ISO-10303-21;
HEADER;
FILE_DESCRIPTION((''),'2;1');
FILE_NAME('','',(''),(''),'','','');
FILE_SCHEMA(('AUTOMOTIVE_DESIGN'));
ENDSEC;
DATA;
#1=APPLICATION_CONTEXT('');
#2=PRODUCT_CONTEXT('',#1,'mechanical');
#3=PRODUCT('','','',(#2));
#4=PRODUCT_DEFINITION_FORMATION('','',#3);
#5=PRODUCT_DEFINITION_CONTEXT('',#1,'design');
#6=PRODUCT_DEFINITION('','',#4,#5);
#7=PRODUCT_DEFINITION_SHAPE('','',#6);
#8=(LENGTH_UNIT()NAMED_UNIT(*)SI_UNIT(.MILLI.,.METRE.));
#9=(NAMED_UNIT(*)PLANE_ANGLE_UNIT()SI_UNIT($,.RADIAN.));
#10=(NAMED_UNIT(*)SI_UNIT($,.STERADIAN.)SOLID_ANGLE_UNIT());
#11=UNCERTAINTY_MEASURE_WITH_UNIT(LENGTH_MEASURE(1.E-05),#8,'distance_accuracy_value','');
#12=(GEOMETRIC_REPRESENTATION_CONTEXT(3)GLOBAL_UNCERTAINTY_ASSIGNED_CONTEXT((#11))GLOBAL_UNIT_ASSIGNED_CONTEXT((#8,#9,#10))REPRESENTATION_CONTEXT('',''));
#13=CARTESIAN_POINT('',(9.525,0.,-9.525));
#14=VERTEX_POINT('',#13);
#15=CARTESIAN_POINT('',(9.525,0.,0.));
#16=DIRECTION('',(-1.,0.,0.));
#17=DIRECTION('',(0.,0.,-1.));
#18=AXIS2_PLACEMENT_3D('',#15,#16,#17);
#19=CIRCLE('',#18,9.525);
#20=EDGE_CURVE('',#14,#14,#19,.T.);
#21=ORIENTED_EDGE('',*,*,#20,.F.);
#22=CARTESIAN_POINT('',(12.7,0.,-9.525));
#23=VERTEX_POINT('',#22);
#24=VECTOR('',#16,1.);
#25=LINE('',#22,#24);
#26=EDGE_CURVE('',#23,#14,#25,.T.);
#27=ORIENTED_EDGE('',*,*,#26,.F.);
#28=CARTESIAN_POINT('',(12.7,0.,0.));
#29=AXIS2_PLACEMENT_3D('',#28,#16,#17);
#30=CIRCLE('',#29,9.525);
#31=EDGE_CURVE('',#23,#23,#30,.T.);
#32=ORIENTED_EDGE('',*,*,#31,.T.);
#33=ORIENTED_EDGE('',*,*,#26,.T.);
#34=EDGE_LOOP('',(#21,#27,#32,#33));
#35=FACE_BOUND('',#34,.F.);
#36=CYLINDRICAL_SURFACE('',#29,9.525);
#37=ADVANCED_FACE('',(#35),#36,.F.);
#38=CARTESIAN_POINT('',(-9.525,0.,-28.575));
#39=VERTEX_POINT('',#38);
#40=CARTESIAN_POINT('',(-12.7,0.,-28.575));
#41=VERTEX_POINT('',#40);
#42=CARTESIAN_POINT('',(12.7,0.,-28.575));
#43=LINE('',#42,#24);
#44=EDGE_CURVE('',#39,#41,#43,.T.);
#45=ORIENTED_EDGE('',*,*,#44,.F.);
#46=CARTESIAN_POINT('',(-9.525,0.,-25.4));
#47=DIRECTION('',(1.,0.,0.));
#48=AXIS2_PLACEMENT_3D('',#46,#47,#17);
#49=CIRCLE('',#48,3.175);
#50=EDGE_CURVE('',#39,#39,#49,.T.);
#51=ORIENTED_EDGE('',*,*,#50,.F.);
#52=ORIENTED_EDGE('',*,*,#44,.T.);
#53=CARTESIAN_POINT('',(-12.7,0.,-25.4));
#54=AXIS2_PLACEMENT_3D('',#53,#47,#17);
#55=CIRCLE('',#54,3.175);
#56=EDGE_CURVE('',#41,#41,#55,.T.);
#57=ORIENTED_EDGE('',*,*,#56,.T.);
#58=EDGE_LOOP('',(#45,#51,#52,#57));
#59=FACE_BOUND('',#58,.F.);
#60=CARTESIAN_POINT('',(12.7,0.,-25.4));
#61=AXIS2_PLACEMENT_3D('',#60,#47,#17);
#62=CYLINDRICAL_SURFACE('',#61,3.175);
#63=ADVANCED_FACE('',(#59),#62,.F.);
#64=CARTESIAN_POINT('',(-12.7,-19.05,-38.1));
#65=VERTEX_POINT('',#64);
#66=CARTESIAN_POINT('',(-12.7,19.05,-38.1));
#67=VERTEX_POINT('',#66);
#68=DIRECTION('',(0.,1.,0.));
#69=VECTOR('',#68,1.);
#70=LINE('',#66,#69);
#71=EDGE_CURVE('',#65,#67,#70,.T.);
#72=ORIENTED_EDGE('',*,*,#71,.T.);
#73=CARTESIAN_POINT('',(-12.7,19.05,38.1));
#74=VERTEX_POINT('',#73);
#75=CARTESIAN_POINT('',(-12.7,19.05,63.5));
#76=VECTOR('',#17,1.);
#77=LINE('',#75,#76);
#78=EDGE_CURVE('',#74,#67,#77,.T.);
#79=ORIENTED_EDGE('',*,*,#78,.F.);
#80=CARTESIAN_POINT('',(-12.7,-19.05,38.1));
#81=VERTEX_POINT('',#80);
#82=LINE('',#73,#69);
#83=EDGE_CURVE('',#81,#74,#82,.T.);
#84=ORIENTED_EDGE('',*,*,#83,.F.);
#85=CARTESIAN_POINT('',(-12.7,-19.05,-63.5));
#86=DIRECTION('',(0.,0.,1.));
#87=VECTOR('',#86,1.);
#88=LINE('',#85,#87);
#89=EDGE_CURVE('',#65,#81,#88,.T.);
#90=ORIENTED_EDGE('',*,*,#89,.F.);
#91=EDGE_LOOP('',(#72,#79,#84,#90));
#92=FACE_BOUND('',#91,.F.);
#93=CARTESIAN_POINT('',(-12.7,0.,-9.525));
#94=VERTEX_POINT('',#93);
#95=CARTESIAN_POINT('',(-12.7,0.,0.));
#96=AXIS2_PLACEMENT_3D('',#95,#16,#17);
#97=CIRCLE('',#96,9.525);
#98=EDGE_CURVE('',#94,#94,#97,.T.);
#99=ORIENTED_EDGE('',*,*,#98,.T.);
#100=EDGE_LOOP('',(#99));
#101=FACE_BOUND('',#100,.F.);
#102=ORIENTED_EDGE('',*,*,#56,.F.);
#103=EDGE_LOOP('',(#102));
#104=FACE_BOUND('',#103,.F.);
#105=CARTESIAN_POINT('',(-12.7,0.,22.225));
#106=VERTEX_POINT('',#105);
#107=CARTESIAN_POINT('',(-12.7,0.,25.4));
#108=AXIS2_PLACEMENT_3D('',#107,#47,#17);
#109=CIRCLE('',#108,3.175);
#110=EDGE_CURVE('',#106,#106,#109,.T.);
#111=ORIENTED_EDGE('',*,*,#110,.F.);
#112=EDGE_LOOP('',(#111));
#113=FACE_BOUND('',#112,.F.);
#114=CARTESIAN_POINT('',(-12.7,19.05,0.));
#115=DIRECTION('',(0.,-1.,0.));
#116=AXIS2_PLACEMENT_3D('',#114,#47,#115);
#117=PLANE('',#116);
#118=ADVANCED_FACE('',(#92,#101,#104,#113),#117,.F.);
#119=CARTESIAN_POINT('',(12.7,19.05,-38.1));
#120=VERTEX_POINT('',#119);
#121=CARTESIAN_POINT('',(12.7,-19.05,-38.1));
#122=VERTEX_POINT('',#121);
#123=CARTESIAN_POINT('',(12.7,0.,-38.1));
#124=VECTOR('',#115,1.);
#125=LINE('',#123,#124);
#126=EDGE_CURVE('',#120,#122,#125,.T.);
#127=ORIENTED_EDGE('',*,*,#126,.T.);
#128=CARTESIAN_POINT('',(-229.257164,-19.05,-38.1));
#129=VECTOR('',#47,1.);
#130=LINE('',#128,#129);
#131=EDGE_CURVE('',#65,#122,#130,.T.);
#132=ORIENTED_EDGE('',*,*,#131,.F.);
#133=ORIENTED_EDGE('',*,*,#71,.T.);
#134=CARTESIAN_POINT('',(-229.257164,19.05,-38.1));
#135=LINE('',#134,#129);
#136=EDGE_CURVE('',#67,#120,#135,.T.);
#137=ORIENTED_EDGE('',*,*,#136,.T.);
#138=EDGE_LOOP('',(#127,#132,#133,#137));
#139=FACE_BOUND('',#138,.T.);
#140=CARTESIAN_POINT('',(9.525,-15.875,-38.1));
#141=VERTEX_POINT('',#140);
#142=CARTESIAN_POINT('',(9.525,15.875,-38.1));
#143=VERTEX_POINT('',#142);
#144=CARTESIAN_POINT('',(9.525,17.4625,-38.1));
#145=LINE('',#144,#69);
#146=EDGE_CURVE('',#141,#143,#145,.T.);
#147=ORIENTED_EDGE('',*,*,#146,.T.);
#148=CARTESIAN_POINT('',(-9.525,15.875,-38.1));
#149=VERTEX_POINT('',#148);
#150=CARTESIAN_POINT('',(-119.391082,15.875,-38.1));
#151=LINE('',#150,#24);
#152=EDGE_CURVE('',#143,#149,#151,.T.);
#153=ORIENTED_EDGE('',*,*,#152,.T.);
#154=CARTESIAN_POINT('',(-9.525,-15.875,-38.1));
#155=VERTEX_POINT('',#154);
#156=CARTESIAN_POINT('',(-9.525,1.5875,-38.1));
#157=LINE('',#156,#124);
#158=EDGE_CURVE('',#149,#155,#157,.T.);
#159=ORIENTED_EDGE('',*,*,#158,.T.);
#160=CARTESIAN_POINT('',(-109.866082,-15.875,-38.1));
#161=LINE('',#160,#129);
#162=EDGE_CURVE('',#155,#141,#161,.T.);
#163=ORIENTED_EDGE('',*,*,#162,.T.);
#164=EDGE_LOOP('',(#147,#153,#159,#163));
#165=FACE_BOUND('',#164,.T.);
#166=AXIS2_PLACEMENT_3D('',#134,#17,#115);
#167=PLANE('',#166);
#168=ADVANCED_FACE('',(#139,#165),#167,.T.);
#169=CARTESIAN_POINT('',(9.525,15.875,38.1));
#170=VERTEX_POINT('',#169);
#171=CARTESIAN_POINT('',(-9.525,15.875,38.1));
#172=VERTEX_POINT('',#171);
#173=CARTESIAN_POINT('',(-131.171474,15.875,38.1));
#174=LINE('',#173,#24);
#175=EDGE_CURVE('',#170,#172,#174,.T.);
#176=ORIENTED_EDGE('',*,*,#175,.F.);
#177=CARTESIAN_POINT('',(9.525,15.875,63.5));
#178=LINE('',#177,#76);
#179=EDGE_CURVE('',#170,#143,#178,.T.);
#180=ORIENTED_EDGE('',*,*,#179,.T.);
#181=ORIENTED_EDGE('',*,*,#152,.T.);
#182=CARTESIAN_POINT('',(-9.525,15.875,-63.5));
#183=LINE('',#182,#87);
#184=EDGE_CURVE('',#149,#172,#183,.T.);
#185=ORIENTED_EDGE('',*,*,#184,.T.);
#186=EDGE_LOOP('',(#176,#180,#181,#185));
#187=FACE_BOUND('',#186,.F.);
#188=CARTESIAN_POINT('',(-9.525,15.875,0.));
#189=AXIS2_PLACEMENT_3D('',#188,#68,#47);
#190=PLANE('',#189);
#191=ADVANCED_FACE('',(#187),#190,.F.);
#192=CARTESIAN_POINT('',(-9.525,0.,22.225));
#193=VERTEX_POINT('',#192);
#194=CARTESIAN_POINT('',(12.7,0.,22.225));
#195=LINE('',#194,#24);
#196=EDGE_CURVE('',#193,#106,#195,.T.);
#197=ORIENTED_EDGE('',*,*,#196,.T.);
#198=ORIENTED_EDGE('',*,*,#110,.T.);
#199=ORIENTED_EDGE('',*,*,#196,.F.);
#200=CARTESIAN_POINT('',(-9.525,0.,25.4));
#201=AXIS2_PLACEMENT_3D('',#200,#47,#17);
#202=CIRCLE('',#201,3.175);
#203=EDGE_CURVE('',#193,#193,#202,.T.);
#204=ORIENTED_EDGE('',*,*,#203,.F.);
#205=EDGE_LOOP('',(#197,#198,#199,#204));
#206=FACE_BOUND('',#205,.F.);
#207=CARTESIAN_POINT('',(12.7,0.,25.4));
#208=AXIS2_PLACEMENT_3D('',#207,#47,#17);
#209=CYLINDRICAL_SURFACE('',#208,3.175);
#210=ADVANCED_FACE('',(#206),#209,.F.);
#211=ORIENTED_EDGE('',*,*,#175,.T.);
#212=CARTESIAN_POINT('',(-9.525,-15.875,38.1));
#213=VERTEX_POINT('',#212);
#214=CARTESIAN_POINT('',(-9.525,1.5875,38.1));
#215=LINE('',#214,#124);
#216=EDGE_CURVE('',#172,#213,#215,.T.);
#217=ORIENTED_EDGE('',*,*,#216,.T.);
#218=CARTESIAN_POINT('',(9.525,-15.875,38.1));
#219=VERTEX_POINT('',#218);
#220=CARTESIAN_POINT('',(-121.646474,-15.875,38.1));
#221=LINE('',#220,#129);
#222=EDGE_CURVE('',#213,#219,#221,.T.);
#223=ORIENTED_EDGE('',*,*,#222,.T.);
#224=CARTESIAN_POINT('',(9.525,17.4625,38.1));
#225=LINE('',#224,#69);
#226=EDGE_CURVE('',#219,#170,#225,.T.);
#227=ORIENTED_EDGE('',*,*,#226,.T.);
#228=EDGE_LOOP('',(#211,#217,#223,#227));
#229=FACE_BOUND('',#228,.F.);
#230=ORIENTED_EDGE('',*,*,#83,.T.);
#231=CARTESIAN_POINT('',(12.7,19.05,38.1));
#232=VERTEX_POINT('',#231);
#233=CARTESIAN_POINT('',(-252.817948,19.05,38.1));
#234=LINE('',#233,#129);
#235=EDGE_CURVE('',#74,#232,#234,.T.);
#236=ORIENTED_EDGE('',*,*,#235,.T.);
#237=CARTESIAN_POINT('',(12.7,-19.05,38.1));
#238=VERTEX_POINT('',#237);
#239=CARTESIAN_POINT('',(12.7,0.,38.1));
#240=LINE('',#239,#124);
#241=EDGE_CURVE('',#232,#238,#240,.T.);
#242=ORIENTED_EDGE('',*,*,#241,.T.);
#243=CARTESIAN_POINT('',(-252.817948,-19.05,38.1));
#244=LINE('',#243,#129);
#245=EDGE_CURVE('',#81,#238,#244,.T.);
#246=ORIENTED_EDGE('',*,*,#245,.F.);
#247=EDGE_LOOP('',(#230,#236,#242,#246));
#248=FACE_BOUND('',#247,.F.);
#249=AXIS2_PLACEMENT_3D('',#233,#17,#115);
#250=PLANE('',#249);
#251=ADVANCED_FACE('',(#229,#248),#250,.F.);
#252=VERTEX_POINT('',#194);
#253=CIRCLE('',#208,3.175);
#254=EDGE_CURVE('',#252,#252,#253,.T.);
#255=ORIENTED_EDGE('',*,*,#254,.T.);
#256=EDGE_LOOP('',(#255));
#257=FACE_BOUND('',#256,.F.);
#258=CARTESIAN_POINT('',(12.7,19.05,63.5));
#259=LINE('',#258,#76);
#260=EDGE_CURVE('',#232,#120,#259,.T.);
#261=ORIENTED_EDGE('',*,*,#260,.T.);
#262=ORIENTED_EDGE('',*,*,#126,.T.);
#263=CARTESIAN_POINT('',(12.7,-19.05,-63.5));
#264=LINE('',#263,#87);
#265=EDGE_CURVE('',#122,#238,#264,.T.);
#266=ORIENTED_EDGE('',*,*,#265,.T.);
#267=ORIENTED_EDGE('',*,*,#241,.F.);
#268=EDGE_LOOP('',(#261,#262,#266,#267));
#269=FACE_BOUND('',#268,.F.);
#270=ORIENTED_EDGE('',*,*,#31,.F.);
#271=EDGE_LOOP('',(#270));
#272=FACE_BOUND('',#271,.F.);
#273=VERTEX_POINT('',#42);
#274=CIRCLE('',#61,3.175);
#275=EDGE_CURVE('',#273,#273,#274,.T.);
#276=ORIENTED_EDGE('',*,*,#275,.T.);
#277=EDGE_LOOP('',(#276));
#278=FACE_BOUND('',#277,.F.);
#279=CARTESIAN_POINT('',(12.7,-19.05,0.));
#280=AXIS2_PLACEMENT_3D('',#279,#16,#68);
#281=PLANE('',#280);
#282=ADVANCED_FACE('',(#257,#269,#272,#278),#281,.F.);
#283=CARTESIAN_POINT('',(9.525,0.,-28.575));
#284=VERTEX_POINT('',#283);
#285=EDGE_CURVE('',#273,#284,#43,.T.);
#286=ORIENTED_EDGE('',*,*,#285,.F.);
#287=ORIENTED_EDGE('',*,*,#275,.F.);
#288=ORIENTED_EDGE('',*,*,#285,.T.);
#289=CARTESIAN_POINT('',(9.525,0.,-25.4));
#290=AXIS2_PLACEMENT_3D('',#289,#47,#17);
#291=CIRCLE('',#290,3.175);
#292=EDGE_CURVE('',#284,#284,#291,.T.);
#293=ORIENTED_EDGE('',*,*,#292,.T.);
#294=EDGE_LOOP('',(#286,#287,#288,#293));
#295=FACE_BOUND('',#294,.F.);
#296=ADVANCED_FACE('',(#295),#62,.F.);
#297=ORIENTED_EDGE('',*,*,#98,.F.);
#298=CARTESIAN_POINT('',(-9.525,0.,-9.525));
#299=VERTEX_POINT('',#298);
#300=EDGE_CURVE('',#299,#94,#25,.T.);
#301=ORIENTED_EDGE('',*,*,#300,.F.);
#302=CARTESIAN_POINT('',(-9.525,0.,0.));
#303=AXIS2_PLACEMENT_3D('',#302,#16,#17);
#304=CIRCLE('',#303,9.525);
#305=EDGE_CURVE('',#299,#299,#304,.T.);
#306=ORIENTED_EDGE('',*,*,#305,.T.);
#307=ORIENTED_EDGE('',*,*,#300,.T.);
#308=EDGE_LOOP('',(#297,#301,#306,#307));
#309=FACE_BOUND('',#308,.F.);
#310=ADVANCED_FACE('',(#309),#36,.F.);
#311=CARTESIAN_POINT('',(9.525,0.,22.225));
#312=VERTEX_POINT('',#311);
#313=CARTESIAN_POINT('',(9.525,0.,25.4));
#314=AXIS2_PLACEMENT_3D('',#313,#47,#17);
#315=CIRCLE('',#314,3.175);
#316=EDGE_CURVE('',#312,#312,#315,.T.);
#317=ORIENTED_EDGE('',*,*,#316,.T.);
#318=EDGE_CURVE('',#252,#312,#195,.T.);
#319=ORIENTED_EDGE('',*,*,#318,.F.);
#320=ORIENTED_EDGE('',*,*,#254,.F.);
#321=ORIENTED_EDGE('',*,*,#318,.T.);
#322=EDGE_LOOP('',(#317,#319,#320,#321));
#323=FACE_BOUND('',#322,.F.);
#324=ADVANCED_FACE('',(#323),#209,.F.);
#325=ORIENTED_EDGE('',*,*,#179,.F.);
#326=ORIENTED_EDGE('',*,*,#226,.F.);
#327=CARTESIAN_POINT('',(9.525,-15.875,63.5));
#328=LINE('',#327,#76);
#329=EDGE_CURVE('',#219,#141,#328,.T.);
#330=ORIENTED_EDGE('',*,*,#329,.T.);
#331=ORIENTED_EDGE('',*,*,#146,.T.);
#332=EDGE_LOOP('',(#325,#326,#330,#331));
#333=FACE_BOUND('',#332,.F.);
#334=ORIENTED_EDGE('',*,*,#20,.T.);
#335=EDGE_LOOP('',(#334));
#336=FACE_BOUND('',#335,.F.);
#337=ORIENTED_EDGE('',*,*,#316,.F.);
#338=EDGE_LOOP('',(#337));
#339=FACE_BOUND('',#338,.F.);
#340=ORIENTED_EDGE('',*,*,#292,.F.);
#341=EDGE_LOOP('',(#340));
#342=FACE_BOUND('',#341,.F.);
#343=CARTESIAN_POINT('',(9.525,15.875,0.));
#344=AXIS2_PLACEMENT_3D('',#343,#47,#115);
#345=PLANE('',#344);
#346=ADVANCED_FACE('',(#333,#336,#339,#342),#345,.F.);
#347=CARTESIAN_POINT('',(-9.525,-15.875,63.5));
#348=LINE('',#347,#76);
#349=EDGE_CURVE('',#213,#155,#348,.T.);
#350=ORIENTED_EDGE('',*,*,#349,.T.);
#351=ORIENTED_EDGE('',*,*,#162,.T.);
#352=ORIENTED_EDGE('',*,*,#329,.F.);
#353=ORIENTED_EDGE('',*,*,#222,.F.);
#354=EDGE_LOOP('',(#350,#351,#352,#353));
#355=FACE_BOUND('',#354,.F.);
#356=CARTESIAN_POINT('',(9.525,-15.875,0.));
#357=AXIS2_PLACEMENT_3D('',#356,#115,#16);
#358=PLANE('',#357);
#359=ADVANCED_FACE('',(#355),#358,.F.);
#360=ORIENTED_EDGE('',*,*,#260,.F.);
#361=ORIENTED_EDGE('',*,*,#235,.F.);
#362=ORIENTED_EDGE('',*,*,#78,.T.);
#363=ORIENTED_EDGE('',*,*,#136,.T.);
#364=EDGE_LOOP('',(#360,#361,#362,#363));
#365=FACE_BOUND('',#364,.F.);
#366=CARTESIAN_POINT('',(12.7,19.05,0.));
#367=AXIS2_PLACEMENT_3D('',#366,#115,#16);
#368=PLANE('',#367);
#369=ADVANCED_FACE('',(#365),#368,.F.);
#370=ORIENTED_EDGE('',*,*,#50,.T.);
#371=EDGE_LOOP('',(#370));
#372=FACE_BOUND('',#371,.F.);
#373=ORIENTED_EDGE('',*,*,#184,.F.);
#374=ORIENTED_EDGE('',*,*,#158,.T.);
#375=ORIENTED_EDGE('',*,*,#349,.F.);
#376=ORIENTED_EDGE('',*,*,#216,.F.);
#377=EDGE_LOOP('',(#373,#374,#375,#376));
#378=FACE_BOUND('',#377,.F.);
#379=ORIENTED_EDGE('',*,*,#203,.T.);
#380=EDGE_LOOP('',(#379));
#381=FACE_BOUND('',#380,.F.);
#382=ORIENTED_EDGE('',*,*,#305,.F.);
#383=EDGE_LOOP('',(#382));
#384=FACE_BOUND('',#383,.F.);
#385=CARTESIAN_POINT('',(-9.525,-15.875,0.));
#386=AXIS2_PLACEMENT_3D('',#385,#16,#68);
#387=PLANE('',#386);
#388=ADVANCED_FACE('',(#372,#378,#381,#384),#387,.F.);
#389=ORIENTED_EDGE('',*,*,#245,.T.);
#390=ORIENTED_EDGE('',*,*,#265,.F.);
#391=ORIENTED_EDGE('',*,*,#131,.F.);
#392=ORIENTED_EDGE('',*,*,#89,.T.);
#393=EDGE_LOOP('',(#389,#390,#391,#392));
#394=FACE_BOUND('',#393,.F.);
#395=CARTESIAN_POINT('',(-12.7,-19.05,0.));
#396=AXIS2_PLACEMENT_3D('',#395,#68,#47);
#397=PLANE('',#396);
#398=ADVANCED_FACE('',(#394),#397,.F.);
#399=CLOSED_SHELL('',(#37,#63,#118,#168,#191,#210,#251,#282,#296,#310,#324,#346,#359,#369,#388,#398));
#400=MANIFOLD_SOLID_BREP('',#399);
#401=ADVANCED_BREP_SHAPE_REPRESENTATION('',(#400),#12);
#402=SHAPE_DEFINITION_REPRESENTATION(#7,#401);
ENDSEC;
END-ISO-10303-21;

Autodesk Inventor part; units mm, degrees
ref_plane "YZ Plane" through (0, 0, 0) normal (1, 0, 0) x (0, 1, 0)
ref_plane "XZ Plane" through (0, 0, 0) normal (0, 1, 0) x (-1, 0, 0)
ref_plane "XY Plane" through (0, 0, 0) normal (0, 0, 1) x (1, 0, 0)
sketch "Sketch1" plane through (0, 0, 0) normal (0, 0, 1) x (1, 0, 0)
  line L0 (-12.7, -19.05) -> (12.7, -19.05)
  line L1 (12.7, -19.05) -> (12.7, 19.05)
  line L2 (12.7, 19.05) -> (-12.7, 19.05)
  line L3 (-12.7, 19.05) -> (-12.7, -19.05)
  line L4 (-12.7, -19.05) -> (12.7, 19.05) construction
  line L5 (12.7, -19.05) -> (-12.7, 19.05) construction
  line L6 (-9.525, 15.875) -> (9.525, 15.875)
  line L7 (9.525, 15.875) -> (9.525, -15.875)
  line L8 (9.525, -15.875) -> (-9.525, -15.875)
  line L9 (-9.525, -15.875) -> (-9.525, 15.875)
  point P0 (0, 0)
  dimension "d0" = 25.4
  dimension "d1" = 38.1
  dimension "d2" = 3.175
extrude "Extrusion1" add sketch "Sketch1" along normal mid plane 127
sketch "Sketch2" plane through (12.7, -19.05, 63.5) normal (1, 0, 0) x (0, 0, -1)
  circle A0 centre (63.5, 19.05) radius 3.175
  dimension "d5" = 6.35
extrude "Extrusion2" cut sketch "Sketch2" against normal through all
pattern_linear "Rectangular Pattern1" count 4 spacing 25.4 along (0, 0, 1) of "Extrusion2" first direction both ways yes
hole "Hole1" at (12.7, 0, 0) direction (-1, 0, 0) diameter 15.875 end through all
hole "Hole2" at (12.7, 0, 0) direction (-1, 0, 0) diameter 19.05 end through all
sketch "Sketch3" plane through (12.7, -19.05, 63.5) normal (1, 0, 0) x (0, 0, -1)
  line L0 (127, 38.1) -> (0, 38.1) projected
  line L1 (63.5, 38.1) -> (63.5, 0)
  line L2 (0, 0) -> (127, 0) projected
  line L3 (25.4, 38.1) -> (25.4, 0)
  line L4 (0, 0) -> (0, 38.1) projected
  line L5 (101.6, 38.1) -> (101.6, 0)
  line L6 (127, 38.1) -> (127, 0) projected
  point P0 (63.5, 19.05)
  dimension "d29" = 25.4
  dimension "d30" = 25.4
split body "Split1" sketch "Sketch3" result one side removed curves L3 removed pieces at (12.2, -13.7506, 50.6724)
split body "Split2" sketch "Sketch3" result one side removed curves L5 removed pieces at (12.2, -6.35, -55.0333)
properties part number "2AM-17-P-5209 - cylinder mount" material "Aluminum 6061"
